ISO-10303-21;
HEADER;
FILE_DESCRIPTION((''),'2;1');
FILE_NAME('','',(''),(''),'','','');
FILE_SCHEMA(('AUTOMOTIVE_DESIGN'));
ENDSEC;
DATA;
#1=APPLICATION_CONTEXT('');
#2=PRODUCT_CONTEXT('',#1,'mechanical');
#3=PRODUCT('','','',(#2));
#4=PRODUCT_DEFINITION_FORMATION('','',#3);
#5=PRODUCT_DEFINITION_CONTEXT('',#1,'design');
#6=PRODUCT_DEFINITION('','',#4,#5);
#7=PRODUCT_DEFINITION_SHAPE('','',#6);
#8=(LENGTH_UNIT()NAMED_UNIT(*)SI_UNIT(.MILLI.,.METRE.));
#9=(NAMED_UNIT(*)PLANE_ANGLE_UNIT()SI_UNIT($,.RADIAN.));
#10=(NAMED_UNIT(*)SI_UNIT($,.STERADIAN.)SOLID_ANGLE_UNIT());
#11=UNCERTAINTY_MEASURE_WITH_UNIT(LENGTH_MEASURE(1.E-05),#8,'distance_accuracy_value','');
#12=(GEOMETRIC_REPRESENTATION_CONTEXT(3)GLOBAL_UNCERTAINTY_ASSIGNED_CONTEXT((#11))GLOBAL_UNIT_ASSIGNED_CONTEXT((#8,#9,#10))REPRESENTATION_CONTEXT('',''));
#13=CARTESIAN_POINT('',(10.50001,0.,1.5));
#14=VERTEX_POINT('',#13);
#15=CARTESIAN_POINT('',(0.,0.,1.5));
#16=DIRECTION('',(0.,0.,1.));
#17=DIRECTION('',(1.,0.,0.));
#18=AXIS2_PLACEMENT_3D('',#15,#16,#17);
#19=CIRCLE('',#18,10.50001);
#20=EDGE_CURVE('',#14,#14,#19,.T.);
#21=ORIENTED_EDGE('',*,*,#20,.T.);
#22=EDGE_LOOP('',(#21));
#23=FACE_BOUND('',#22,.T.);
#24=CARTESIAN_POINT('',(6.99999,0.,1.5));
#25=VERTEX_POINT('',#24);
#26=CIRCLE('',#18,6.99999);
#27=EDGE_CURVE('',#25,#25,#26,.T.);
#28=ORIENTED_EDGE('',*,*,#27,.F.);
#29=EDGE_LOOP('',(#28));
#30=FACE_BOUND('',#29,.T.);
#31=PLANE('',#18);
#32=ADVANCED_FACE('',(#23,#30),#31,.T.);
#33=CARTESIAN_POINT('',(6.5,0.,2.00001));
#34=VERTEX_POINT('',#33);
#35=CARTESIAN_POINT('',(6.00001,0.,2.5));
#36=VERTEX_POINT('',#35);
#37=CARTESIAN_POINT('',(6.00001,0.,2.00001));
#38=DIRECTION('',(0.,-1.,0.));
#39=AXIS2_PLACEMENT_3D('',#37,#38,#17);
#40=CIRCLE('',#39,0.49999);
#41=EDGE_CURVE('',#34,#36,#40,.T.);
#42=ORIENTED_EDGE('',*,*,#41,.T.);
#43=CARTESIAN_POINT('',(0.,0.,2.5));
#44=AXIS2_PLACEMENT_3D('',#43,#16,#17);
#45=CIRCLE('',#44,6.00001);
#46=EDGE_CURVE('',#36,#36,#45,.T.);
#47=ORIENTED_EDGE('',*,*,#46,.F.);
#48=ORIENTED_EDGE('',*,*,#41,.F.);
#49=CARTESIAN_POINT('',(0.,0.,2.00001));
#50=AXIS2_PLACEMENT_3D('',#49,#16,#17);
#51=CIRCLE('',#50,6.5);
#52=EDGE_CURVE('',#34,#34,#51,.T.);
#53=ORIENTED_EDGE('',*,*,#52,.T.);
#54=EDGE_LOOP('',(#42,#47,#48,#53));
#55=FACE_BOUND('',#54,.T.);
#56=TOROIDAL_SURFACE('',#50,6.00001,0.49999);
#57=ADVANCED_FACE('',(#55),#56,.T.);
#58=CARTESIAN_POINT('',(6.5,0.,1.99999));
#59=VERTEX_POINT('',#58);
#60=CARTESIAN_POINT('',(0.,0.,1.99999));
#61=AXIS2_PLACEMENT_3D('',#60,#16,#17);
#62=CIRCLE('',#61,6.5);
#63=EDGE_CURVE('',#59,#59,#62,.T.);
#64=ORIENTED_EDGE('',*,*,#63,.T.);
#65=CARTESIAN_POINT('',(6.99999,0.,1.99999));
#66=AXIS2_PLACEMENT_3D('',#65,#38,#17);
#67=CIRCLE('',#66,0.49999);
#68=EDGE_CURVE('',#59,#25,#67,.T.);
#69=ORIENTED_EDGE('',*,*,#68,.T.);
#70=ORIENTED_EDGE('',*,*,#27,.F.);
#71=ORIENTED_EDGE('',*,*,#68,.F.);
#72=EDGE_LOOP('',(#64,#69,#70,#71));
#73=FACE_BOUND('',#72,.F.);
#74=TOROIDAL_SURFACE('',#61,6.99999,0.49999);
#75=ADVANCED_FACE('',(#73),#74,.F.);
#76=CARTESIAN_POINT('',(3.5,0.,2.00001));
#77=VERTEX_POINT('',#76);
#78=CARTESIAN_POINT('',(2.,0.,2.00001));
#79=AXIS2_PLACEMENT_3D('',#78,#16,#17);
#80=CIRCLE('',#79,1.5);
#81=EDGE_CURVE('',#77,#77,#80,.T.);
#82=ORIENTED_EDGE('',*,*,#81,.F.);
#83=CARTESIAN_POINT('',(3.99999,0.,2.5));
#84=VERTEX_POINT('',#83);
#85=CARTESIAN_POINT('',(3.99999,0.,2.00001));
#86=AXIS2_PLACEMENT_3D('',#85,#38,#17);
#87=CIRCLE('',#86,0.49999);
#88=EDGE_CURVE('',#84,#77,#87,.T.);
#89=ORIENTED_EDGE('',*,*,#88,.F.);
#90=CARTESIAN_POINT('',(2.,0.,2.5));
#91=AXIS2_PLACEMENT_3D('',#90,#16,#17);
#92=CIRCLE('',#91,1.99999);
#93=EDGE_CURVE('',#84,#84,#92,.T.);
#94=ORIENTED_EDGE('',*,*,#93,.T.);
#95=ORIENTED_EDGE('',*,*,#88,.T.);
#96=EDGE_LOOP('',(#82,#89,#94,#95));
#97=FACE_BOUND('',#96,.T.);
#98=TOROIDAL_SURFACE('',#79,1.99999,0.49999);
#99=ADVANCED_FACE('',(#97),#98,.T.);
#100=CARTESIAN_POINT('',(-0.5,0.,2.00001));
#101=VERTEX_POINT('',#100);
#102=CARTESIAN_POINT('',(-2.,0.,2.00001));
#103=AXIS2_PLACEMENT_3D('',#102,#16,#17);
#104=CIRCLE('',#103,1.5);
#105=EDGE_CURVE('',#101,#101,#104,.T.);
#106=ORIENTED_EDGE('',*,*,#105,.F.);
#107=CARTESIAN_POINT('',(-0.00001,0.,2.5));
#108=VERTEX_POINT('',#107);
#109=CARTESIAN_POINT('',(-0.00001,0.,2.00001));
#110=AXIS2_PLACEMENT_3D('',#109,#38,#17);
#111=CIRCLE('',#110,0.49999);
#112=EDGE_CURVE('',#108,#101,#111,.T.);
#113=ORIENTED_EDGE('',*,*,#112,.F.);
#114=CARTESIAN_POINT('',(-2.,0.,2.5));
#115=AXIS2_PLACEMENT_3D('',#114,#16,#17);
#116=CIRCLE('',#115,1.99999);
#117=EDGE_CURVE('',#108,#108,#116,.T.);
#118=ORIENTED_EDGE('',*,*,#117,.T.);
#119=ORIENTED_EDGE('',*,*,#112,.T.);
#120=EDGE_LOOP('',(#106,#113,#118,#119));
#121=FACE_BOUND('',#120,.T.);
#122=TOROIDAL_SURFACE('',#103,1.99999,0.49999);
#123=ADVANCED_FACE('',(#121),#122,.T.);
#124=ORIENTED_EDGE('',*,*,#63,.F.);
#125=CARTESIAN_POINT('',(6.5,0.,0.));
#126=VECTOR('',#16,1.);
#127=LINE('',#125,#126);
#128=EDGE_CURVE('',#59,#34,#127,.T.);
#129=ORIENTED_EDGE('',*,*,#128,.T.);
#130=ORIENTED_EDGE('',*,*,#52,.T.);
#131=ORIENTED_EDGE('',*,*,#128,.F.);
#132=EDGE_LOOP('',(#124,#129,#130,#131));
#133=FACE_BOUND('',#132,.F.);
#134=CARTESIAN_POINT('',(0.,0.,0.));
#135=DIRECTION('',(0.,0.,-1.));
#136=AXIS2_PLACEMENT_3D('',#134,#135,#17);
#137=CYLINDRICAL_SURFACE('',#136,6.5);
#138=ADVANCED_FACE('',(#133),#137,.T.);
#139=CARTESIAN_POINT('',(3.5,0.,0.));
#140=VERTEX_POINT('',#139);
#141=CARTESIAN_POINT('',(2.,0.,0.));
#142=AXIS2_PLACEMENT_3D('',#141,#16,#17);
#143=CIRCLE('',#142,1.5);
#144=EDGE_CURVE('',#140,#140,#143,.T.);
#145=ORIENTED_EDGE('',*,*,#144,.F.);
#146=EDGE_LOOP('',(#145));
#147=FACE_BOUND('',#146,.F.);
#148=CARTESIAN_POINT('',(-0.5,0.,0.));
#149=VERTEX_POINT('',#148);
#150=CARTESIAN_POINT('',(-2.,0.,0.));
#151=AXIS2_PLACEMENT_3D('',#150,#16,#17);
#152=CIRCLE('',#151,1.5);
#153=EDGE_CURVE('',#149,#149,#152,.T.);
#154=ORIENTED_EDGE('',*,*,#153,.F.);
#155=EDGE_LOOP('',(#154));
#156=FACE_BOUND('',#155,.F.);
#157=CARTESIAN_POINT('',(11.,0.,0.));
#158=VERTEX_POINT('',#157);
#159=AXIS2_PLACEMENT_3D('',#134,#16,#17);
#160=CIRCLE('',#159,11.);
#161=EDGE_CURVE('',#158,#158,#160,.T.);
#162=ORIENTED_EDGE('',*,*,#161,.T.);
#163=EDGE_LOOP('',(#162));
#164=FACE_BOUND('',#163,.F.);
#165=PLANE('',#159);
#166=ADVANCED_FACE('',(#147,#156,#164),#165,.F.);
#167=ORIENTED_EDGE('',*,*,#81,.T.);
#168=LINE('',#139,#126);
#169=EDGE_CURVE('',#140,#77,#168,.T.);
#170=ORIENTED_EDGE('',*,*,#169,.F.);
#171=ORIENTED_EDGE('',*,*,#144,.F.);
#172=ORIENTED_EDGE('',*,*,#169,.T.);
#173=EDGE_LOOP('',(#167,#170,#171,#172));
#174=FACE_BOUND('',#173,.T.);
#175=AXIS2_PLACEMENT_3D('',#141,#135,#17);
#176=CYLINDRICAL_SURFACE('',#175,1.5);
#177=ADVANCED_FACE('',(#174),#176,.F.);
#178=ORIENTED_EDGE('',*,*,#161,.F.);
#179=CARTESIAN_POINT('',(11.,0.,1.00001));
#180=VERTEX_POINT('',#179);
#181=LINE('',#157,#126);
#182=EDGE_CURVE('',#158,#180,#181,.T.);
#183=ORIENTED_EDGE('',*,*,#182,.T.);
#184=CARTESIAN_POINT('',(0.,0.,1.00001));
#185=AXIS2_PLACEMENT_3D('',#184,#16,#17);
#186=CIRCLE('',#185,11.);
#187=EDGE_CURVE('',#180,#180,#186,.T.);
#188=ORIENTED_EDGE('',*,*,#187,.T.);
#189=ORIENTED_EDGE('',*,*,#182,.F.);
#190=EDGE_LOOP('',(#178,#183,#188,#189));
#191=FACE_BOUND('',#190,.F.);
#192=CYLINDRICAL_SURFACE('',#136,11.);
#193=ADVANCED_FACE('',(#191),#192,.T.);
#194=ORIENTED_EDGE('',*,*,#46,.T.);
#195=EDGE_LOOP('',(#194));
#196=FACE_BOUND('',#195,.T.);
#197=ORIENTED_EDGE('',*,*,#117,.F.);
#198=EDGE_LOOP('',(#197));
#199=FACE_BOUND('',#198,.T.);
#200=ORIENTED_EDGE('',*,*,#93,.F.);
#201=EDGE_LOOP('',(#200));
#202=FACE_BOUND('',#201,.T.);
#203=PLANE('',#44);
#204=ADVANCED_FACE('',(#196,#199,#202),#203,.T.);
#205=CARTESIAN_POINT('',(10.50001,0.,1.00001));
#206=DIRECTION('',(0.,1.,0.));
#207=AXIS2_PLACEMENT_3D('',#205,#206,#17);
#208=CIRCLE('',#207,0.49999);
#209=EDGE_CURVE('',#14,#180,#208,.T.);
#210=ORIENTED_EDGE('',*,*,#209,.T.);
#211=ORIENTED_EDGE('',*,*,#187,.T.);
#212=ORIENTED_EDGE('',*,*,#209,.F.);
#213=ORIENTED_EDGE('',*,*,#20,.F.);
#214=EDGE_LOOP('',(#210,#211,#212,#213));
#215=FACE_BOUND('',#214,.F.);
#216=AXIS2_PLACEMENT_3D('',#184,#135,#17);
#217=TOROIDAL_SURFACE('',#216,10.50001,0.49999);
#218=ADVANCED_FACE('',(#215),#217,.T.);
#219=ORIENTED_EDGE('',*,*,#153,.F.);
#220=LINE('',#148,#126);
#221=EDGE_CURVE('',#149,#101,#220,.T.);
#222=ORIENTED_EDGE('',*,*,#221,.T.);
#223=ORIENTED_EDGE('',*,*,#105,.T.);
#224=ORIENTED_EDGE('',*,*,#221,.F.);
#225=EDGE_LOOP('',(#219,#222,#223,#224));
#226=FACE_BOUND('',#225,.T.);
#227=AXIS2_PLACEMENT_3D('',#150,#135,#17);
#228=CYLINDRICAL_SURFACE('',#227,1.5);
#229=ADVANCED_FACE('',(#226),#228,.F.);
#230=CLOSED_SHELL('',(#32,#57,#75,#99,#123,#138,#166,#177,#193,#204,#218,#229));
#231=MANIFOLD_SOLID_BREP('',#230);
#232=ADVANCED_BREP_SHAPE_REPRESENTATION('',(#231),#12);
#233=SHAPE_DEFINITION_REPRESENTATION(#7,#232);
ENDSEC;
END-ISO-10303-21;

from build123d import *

# Parameters (mm, degrees)
F0_R     = 11
F0_R_2   = 6.5
F1_DEPTH = 1.5
F0_R_3   = 1.5
F2_DEPTH = 2.5
F3_R     = 0.49999


# Not quite as in the source:
# - a fillet or chamfer is up to 0.001 mm smaller than in the source, because OpenCascade refuses the exact size


with BuildPart() as f1:
    # F0 (on Top) → F1 (new body)
    with BuildSketch(Plane.XY):
        Circle(F0_R)
        Circle(F0_R_2, mode=Mode.SUBTRACT)
    extrude(amount=F1_DEPTH)

    # F0 (on Top) → F2 (join)
    with BuildSketch(Plane.XY):
        Circle(F0_R_2)
        with Locations((-2, 0)):
            Circle(F0_R_3, mode=Mode.SUBTRACT)
        with Locations((2, 0)):
            Circle(F0_R_3, mode=Mode.SUBTRACT)
    extrude(amount=F2_DEPTH)

    # F3 (radius 0.5 in the source; OpenCascade refuses exactly that, so slightly less here)
    f3_edges = [f1.edges().sort_by_distance(p)[0] for p in [
        (-11, 0, 1.5),
        (-6.5, 0, 1.5),
        (-6.5, 0, 2.5),
        (0.5, 0, 2.5),
        (-3.5, 0, 2.5),
    ]]
    fillet(f3_edges, radius=F3_R)


solid = f1.part
